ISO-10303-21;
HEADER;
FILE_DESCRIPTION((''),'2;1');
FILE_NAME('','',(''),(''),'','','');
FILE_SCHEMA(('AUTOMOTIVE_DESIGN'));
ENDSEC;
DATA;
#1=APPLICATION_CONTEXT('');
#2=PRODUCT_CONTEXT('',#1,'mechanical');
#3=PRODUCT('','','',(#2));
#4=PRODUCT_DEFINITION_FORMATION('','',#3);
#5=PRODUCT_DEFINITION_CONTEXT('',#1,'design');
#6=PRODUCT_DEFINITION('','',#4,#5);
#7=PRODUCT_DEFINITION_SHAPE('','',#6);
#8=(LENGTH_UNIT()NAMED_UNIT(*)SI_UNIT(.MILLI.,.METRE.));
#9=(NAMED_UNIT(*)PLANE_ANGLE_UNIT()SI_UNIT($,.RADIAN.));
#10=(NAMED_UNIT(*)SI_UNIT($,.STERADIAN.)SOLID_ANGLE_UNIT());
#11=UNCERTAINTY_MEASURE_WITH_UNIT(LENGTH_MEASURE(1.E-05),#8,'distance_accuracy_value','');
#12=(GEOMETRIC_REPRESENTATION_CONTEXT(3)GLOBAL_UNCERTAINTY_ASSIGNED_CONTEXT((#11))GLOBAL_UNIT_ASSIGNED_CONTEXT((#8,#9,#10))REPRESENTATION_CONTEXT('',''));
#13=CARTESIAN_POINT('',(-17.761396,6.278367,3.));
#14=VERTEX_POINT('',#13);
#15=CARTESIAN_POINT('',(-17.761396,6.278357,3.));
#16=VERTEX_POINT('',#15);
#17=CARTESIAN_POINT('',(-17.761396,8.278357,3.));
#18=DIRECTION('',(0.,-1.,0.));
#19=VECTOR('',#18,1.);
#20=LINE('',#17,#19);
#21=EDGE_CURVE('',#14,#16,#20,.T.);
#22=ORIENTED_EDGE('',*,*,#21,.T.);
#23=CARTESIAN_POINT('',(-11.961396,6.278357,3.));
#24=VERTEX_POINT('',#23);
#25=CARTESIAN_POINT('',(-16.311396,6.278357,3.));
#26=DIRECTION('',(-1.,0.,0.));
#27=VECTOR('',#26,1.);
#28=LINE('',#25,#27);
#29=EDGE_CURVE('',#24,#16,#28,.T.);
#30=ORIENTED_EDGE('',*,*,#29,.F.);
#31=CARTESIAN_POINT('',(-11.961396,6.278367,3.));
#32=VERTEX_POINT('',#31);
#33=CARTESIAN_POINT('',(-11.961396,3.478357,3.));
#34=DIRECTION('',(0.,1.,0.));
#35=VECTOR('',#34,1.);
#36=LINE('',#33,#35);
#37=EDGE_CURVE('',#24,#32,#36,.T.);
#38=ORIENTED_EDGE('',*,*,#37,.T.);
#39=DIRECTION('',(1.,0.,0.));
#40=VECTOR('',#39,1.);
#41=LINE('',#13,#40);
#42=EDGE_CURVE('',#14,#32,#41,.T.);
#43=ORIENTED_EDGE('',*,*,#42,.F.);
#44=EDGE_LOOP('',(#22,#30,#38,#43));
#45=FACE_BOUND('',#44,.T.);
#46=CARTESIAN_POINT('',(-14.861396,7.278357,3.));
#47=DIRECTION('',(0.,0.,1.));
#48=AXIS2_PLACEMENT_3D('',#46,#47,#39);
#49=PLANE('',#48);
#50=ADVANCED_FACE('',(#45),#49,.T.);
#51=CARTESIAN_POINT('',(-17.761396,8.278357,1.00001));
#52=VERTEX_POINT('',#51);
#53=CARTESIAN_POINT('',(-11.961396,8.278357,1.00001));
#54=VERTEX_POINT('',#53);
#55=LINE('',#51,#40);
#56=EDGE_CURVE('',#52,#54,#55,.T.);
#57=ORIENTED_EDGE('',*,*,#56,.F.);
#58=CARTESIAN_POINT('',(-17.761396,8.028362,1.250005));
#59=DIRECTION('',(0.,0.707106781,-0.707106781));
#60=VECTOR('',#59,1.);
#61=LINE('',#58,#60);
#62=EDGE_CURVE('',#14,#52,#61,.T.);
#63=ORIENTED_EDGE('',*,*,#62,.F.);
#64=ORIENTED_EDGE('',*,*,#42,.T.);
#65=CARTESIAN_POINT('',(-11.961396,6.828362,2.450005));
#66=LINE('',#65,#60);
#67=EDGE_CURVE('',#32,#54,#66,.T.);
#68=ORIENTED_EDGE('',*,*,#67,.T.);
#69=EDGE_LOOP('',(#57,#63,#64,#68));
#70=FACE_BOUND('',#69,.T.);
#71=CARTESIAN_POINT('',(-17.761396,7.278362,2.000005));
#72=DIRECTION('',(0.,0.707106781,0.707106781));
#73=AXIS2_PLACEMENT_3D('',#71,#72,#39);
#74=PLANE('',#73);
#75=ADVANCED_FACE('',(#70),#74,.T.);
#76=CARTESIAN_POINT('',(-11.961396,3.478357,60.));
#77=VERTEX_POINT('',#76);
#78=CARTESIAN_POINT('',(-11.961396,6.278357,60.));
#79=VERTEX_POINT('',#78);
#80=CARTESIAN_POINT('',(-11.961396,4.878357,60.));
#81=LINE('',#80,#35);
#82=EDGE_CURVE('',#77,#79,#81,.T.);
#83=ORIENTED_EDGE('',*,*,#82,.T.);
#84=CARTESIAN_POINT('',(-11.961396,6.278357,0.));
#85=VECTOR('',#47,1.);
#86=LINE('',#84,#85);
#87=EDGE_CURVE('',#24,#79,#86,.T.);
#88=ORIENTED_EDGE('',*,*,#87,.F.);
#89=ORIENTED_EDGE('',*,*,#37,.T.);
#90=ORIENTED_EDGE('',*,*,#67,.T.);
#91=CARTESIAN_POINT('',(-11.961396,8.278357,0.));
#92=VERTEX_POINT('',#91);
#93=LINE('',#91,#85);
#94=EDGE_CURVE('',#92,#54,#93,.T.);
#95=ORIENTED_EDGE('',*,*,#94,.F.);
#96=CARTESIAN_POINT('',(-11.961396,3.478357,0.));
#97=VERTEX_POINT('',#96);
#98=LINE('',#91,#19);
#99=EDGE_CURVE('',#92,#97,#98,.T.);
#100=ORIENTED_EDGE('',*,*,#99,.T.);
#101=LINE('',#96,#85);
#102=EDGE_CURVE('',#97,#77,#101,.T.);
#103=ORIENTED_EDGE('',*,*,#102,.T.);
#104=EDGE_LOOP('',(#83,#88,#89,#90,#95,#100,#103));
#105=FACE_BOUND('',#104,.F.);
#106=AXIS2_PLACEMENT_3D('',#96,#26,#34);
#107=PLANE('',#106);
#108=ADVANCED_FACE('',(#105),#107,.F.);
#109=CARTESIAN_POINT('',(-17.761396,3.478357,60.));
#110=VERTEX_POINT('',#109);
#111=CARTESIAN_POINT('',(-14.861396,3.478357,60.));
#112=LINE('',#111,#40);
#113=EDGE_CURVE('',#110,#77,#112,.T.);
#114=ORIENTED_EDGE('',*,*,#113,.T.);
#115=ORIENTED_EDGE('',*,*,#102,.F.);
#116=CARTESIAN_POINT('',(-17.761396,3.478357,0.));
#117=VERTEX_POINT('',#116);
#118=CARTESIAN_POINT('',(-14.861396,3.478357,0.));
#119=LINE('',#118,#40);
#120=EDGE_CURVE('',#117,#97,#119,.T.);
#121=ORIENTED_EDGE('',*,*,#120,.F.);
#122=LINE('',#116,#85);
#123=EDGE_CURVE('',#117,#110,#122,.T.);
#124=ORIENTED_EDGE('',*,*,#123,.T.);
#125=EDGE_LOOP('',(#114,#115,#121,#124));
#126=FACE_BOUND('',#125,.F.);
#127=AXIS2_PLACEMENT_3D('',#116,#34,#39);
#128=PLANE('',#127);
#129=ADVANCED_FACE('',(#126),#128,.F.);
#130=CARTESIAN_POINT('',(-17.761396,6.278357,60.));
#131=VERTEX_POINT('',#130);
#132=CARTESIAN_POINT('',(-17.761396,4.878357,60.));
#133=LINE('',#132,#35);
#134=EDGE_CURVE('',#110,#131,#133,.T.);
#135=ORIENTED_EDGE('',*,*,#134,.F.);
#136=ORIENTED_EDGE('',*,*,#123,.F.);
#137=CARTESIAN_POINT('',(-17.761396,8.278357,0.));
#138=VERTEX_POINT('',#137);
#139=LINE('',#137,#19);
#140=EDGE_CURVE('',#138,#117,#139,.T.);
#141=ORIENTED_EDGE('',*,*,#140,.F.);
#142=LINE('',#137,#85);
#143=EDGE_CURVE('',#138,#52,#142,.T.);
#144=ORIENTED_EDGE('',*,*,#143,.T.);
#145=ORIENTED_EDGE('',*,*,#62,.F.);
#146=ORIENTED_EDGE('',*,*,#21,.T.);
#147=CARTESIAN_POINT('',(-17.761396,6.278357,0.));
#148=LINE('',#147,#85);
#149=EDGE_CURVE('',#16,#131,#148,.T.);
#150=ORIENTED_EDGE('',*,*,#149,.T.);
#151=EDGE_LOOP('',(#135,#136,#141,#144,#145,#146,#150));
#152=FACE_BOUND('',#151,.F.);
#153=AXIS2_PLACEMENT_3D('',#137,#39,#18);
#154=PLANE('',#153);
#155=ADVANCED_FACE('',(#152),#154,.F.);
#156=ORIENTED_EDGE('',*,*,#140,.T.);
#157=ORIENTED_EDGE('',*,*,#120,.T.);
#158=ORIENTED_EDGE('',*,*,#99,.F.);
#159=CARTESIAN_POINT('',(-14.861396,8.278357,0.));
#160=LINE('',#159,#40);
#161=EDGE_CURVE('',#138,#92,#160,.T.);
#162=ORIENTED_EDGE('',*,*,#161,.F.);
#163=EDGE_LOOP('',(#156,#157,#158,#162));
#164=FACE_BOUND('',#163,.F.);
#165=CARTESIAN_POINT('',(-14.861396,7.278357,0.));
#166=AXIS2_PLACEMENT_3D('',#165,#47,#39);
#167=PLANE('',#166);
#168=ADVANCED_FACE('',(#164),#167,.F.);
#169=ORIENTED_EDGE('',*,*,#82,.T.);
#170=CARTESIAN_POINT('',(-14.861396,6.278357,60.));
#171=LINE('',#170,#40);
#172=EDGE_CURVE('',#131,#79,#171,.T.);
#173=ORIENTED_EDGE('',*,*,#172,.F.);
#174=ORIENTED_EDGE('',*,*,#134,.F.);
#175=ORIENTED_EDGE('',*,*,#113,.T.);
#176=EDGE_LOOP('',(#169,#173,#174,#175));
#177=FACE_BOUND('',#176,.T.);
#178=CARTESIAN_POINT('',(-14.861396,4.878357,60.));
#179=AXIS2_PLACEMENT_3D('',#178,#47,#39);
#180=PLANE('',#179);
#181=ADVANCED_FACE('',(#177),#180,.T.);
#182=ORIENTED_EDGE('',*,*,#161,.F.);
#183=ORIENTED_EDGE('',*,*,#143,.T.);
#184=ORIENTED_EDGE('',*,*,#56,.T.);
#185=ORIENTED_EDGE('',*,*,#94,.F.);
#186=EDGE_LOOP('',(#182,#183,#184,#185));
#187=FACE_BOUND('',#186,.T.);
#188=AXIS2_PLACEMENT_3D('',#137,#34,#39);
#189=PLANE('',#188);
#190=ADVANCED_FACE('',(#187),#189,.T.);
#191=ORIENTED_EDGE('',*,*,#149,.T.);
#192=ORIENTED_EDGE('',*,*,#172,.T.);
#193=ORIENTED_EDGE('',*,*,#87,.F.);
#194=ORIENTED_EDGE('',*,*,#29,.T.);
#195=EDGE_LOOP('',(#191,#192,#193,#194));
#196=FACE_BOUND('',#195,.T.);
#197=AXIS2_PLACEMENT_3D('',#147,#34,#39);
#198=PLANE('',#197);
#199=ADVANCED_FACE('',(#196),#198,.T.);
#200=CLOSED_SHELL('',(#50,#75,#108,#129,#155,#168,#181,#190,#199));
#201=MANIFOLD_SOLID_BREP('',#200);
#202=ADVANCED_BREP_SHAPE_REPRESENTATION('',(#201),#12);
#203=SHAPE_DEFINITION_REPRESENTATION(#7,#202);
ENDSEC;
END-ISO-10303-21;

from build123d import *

# Parameters (mm, degrees)
F0_W     = 5.8
F0_H     = 2
F0_H_2   = 2.8
F1_DEPTH = 3
F2_DEPTH = 60
F3_SIZE  = 1.99999


# Not quite as in the source:
# - a fillet or chamfer is up to 0.001 mm smaller than in the source, because OpenCascade refuses the exact size
# - a feature names something its author has since deleted; it is built from what else it names


with BuildPart() as f1:
    # F0 (on Top) → F1 (new body)
    with BuildSketch(Plane.XY):
        with Locations((-14.8613960065, 7.2783571027)):
            Rectangle(F0_W, F0_H)
        with Locations((-14.8613960065, 4.8783571027)):
            Rectangle(F0_W, F0_H_2)
    extrude(amount=F1_DEPTH)

    # F0 (on Top) → F2 (join)
    with BuildSketch(Plane.XY):
        with Locations((-14.8613960065, 4.8783571027)):
            Rectangle(F0_W, F0_H_2)
    extrude(amount=F2_DEPTH)

    # F3 (size 2 in the source; OpenCascade refuses exactly that, so slightly less here)
    f3_edges = [f1.edges().sort_by_distance(p)[0] for p in [
        (-14.861396, 8.278357, 3),
    ]]
    chamfer(f3_edges, length=F3_SIZE)


solid = f1.part
